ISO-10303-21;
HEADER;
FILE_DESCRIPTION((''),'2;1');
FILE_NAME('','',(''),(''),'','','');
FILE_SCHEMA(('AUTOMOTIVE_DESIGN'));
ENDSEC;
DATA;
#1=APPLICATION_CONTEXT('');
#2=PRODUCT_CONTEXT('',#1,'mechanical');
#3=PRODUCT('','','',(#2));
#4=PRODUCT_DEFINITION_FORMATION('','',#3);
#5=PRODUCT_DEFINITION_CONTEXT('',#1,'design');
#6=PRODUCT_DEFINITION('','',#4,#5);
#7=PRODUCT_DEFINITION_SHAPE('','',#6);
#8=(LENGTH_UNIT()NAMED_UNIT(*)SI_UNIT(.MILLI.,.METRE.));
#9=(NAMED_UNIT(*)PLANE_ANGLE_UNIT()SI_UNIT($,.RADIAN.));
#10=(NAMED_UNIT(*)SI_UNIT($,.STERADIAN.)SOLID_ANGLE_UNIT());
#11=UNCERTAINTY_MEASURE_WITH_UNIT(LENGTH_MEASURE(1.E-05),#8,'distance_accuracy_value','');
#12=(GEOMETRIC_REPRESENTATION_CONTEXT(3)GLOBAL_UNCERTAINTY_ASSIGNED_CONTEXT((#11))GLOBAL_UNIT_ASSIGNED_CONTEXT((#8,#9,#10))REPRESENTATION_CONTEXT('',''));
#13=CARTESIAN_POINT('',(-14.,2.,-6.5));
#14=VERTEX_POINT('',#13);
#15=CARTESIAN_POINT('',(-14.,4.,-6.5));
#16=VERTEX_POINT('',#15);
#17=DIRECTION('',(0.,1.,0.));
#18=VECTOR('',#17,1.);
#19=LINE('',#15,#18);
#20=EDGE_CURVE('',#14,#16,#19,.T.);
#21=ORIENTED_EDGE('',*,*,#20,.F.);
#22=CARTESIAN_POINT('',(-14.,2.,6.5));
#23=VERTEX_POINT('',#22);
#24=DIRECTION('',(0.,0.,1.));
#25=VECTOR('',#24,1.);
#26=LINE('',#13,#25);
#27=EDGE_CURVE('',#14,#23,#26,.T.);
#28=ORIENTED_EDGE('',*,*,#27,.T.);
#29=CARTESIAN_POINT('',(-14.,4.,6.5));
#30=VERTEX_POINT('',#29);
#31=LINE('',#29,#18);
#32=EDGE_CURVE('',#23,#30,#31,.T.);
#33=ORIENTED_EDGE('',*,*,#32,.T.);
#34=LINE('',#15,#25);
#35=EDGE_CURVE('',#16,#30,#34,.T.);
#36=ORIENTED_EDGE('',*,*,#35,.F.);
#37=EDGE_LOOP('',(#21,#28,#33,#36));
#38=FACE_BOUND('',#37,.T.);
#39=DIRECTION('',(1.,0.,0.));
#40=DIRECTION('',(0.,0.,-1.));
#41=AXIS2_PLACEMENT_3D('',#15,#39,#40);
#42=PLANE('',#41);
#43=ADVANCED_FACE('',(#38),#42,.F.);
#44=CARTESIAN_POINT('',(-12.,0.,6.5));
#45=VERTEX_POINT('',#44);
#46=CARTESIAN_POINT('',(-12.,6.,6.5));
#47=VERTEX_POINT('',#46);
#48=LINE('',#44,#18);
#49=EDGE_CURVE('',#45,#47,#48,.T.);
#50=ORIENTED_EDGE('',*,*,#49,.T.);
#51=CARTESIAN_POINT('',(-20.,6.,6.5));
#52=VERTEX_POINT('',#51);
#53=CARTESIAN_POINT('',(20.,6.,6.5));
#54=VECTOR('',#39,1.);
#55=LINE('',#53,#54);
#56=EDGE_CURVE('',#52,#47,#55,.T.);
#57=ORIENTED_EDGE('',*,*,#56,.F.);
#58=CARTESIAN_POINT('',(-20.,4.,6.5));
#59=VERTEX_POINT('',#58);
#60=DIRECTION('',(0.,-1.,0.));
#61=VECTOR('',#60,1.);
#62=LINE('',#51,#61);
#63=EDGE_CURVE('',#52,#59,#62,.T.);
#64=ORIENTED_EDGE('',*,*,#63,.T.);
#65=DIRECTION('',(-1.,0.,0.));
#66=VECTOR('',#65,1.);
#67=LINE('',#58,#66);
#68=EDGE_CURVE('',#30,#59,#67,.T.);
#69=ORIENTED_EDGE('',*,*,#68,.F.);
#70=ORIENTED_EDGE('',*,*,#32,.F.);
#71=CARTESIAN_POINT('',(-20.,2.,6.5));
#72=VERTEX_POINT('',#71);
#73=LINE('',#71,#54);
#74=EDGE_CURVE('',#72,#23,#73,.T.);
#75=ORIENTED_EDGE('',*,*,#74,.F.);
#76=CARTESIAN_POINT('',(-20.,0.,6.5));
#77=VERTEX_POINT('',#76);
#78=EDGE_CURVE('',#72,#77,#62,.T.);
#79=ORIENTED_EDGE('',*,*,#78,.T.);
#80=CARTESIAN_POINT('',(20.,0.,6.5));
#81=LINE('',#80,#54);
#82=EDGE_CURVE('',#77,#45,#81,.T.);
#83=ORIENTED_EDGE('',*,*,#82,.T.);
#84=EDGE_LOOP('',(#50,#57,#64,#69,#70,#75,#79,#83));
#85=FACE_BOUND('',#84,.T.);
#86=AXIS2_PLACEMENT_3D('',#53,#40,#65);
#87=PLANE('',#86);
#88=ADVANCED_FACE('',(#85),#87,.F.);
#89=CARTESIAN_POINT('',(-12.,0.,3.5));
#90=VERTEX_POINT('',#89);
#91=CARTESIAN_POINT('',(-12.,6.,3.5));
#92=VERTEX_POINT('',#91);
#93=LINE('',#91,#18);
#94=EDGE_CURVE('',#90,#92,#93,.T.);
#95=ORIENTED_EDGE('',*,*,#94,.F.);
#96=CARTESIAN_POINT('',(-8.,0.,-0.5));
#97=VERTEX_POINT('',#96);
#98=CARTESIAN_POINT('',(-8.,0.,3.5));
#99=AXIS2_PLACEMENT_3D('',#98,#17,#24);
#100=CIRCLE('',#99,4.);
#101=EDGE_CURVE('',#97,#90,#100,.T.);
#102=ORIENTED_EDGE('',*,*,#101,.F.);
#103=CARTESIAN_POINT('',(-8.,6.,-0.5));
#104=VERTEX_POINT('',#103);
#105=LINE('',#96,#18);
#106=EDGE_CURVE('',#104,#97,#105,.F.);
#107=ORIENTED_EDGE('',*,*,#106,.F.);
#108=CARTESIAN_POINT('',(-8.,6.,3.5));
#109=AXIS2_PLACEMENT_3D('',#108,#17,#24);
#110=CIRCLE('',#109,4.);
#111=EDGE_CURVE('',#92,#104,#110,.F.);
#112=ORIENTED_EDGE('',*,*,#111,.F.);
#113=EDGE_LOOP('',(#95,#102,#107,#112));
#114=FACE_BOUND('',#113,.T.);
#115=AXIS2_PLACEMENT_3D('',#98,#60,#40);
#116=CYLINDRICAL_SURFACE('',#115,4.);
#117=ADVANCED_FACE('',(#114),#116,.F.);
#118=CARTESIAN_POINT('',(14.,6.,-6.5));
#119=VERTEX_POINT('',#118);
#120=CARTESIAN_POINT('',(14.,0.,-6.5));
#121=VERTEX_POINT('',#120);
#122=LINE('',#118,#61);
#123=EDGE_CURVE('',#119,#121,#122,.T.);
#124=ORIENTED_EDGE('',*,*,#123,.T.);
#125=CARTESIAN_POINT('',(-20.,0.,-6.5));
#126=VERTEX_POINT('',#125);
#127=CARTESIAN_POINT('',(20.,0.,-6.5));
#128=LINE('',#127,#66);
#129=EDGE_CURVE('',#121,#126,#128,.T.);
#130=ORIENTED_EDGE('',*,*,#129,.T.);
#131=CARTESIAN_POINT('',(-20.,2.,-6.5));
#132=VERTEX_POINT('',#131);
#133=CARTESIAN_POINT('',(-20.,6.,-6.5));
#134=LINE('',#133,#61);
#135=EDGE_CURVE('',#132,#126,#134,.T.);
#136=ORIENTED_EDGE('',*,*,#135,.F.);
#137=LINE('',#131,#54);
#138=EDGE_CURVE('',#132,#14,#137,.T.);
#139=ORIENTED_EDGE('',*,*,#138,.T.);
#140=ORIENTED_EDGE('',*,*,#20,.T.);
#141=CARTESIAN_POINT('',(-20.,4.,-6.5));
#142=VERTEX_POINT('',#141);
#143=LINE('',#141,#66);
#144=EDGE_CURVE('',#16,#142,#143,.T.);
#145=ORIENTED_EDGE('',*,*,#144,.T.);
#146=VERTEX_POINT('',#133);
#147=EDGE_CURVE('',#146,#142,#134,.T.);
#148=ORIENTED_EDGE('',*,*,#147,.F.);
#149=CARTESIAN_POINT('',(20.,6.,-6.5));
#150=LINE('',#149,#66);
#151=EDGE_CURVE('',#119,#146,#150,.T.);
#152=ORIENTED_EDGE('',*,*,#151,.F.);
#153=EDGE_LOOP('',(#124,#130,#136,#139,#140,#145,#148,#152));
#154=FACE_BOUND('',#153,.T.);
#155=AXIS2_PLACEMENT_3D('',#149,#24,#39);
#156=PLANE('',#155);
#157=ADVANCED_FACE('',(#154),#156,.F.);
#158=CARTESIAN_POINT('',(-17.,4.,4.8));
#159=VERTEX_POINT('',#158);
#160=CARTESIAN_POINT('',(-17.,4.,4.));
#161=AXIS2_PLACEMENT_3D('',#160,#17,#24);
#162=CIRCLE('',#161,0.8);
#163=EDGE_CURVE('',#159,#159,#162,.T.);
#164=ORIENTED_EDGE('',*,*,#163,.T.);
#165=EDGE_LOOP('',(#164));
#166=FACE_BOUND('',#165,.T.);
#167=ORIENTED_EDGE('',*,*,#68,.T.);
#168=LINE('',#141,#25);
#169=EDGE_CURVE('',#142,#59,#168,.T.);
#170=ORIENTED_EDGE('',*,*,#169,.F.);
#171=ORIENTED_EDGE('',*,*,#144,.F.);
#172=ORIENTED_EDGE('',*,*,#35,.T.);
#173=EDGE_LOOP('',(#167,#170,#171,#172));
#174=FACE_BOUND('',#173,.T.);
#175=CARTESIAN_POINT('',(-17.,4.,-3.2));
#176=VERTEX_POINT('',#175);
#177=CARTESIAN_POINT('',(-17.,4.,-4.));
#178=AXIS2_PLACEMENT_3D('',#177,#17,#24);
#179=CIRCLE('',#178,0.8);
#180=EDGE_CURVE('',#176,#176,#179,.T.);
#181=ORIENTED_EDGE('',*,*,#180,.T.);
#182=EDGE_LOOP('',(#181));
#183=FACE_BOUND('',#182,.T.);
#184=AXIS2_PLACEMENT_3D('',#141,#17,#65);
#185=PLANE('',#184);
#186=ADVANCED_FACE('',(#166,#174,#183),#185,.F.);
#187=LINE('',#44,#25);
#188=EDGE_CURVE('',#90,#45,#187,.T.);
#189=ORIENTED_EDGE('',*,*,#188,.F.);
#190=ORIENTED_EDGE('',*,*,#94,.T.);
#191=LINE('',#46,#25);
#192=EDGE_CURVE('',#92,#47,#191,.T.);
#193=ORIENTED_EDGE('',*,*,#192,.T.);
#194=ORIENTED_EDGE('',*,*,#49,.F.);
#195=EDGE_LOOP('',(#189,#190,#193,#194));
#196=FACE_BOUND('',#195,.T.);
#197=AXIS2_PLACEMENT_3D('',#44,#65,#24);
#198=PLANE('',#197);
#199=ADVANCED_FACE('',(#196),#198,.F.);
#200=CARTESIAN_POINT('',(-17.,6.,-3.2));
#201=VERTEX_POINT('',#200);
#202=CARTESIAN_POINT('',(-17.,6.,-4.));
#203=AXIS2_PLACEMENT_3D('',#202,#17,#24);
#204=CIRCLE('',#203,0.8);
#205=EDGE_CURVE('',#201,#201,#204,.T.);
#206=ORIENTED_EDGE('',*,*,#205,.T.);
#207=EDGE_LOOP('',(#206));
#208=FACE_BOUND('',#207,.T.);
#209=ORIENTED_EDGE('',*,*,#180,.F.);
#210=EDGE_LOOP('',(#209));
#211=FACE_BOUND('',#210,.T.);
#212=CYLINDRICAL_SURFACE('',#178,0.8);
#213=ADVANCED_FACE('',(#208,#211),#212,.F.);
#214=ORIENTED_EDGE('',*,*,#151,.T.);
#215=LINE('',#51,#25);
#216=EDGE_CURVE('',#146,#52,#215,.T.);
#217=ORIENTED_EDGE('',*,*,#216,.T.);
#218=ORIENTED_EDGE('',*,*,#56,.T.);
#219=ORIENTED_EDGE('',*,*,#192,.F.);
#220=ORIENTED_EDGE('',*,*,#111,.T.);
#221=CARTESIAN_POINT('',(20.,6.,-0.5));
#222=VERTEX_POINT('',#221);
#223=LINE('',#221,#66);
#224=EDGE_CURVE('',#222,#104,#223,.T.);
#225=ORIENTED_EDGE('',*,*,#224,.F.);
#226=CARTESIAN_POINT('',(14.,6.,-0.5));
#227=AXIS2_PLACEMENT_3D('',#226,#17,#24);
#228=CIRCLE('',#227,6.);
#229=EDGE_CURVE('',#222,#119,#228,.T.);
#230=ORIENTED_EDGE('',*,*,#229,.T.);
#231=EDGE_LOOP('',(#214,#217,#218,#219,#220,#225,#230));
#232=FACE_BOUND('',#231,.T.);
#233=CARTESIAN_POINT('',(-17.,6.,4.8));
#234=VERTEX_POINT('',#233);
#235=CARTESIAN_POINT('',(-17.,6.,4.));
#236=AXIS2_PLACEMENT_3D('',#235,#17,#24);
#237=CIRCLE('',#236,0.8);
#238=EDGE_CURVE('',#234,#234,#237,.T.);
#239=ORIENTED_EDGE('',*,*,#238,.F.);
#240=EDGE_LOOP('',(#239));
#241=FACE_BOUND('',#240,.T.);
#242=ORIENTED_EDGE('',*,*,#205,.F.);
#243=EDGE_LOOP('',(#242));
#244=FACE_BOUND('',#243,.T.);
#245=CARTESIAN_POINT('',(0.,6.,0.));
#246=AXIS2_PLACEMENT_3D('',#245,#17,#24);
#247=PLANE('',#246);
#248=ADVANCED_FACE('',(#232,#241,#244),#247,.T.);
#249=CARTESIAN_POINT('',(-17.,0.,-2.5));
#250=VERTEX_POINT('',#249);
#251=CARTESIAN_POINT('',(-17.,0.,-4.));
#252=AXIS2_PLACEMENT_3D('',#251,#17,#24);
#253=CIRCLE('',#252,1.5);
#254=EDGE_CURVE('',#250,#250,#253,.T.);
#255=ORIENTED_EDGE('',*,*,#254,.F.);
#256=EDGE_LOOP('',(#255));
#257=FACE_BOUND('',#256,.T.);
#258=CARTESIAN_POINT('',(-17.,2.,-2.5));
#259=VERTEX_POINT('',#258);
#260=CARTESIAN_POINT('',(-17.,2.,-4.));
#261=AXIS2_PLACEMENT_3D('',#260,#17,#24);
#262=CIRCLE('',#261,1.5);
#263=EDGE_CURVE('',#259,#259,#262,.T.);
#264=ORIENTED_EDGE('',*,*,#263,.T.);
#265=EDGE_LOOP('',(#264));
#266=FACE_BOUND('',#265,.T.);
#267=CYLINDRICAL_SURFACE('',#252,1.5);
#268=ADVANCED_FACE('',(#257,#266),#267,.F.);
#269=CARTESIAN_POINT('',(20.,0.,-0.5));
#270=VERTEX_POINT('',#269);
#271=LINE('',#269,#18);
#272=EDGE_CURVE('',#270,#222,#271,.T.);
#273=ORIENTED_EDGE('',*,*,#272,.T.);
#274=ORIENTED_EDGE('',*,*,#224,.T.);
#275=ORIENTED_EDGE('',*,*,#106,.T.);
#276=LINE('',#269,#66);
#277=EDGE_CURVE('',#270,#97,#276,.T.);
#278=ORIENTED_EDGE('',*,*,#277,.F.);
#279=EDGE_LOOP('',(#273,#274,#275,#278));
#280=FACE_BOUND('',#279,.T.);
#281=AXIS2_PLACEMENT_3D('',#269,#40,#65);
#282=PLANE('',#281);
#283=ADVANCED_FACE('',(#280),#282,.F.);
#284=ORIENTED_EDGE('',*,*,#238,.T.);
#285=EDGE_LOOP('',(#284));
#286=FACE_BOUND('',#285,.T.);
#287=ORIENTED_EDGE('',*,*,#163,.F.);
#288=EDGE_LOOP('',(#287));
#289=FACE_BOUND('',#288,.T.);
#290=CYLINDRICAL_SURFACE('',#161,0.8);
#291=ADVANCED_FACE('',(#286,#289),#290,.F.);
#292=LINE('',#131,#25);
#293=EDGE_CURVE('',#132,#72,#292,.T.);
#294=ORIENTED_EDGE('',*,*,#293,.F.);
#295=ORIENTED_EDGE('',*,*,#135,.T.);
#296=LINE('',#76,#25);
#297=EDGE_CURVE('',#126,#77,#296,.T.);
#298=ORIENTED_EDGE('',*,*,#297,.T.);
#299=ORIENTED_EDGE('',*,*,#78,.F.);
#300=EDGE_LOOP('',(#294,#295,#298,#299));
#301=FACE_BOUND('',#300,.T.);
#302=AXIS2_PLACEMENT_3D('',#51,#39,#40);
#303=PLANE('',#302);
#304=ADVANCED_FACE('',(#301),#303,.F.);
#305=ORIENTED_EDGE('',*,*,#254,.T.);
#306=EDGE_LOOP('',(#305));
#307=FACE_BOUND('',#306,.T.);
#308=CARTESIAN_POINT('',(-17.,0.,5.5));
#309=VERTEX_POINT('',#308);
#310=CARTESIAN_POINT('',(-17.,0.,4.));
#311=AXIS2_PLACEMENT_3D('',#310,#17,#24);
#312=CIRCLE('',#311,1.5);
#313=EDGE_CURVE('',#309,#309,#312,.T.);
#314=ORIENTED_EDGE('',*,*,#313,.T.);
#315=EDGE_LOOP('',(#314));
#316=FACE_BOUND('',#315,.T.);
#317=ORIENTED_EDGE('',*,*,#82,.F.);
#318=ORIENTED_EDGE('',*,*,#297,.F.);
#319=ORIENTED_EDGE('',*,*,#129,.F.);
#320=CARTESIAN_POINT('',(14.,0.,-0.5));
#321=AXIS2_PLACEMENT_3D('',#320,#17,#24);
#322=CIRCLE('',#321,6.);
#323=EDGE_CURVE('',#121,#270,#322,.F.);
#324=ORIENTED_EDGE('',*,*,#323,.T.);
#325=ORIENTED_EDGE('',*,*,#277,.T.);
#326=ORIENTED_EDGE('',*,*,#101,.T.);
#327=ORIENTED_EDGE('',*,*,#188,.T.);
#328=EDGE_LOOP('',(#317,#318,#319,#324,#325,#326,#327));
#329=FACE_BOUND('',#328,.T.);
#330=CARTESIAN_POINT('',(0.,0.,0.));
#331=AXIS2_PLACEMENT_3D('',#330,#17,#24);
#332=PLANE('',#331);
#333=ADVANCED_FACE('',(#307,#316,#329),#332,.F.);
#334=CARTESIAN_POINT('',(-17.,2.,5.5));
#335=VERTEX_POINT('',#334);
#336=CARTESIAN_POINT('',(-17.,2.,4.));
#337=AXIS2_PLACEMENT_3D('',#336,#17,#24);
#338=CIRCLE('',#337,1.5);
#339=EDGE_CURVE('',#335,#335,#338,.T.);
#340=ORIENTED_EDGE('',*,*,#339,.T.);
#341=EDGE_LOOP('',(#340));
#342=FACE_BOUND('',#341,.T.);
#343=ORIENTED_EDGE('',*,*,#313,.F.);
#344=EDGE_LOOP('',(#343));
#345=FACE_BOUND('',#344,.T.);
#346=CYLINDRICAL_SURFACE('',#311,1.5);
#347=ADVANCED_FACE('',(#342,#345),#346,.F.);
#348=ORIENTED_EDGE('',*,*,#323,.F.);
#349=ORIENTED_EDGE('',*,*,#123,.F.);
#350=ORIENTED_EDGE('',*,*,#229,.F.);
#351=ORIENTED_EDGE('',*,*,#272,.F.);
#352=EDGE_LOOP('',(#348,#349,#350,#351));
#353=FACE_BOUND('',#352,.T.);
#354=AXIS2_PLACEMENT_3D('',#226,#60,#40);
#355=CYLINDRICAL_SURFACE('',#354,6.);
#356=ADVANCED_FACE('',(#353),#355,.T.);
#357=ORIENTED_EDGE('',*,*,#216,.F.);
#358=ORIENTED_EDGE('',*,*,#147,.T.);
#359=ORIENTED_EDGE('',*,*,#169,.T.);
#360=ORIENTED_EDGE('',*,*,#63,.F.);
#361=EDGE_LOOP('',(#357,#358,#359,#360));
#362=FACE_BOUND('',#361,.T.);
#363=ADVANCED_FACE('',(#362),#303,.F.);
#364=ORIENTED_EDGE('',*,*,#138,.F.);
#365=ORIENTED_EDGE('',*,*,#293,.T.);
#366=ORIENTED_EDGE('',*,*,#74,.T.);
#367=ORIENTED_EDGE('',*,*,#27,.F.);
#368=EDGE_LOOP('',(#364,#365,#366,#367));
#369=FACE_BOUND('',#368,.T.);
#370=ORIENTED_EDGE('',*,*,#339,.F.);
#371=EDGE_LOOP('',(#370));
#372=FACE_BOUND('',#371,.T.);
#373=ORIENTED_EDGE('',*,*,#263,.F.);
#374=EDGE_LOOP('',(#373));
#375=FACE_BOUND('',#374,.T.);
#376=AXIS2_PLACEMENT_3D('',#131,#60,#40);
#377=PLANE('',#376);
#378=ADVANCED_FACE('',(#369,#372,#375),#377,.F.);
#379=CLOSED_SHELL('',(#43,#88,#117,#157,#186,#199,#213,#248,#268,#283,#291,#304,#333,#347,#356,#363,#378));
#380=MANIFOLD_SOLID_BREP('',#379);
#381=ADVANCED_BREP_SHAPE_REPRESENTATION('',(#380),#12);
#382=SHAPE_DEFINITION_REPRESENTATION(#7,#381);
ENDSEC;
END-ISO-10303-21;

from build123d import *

# Parameters (mm, degrees)
SKETCH1_W           = 40
SKETCH1_H           = 13
BOSS_EXTRUDE1_DEPTH = 6
SKETCH2_W           = 6
SKETCH2_H           = 2
CUT_EXTRUDE1_DEPTH  = 25.596747752
SKETCH3_R           = 0.8
CUT_EXTRUDE2_DEPTH  = 2
SKETCH4_W           = 32
SKETCH4_H           = 7
CUT_EXTRUDE3_DEPTH  = 22.868927729
FILLET1_R           = 4
FILLET3_R           = 6
SKETCH5_R           = 1.5
CUT_EXTRUDE4_DEPTH  = 2


with BuildPart() as part:
    # Sketch1 → Boss-Extrude1 (new body)
    with BuildSketch(Plane(origin=(0, 0, 0), x_dir=(1, 0, 0), z_dir=(0, 1, 0))):
        Rectangle(SKETCH1_W, SKETCH1_H)
    extrude(amount=BOSS_EXTRUDE1_DEPTH)

    # Sketch2 → Cut-Extrude1 (cut, through all)
    with BuildSketch(Plane.XY.offset(6.5)):
        with Locations((-17, 3)):
            Rectangle(SKETCH2_W, SKETCH2_H)
    extrude(amount=-CUT_EXTRUDE1_DEPTH, mode=Mode.SUBTRACT)

    # Sketch3 → Cut-Extrude2 (cut)
    with BuildSketch(Plane(origin=(0, 6, 0), x_dir=(1, 0, 0), z_dir=(0, 1, 0))):
        with Locations(Location((-17, 4, 0), (0, 0, 270))):
            Circle(SKETCH3_R)
        with Locations(Location((-17, -4, 0), (0, 0, 270))):
            Circle(SKETCH3_R)
    extrude(amount=-CUT_EXTRUDE2_DEPTH, mode=Mode.SUBTRACT)

    # Sketch4 → Cut-Extrude3 (cut, through all)
    with BuildSketch(Plane(origin=(0, 6, 0), x_dir=(1, 0, 0), z_dir=(0, 1, 0))):
        with Locations((4, -3)):
            Rectangle(SKETCH4_W, SKETCH4_H)
    extrude(amount=-CUT_EXTRUDE3_DEPTH, mode=Mode.SUBTRACT)

    # Fillet1
    fillet1_edges = [part.edges().sort_by_distance(p)[0] for p in [
        (-12, 3, -0.5),
    ]]
    fillet(fillet1_edges, radius=FILLET1_R)

    # Fillet3
    fillet3_edges = [part.edges().sort_by_distance(p)[0] for p in [
        (20, 3, -6.5),
    ]]
    fillet(fillet3_edges, radius=FILLET3_R - 0.0001)  # a hair under: the kernel refuses the full size

    # Sketch5 → Cut-Extrude4 (cut)
    with BuildSketch(Plane(origin=(0, 2, 0), x_dir=(1, 0, 0), z_dir=(0, 1, 0))):
        with Locations(Location((-17, 4, 0), (0, 0, 270))):
            Circle(SKETCH5_R)
        with Locations(Location((-17, -4, 0), (0, 0, 270))):
            Circle(SKETCH5_R)
    extrude(amount=-CUT_EXTRUDE4_DEPTH, mode=Mode.SUBTRACT)


solid = part.part
